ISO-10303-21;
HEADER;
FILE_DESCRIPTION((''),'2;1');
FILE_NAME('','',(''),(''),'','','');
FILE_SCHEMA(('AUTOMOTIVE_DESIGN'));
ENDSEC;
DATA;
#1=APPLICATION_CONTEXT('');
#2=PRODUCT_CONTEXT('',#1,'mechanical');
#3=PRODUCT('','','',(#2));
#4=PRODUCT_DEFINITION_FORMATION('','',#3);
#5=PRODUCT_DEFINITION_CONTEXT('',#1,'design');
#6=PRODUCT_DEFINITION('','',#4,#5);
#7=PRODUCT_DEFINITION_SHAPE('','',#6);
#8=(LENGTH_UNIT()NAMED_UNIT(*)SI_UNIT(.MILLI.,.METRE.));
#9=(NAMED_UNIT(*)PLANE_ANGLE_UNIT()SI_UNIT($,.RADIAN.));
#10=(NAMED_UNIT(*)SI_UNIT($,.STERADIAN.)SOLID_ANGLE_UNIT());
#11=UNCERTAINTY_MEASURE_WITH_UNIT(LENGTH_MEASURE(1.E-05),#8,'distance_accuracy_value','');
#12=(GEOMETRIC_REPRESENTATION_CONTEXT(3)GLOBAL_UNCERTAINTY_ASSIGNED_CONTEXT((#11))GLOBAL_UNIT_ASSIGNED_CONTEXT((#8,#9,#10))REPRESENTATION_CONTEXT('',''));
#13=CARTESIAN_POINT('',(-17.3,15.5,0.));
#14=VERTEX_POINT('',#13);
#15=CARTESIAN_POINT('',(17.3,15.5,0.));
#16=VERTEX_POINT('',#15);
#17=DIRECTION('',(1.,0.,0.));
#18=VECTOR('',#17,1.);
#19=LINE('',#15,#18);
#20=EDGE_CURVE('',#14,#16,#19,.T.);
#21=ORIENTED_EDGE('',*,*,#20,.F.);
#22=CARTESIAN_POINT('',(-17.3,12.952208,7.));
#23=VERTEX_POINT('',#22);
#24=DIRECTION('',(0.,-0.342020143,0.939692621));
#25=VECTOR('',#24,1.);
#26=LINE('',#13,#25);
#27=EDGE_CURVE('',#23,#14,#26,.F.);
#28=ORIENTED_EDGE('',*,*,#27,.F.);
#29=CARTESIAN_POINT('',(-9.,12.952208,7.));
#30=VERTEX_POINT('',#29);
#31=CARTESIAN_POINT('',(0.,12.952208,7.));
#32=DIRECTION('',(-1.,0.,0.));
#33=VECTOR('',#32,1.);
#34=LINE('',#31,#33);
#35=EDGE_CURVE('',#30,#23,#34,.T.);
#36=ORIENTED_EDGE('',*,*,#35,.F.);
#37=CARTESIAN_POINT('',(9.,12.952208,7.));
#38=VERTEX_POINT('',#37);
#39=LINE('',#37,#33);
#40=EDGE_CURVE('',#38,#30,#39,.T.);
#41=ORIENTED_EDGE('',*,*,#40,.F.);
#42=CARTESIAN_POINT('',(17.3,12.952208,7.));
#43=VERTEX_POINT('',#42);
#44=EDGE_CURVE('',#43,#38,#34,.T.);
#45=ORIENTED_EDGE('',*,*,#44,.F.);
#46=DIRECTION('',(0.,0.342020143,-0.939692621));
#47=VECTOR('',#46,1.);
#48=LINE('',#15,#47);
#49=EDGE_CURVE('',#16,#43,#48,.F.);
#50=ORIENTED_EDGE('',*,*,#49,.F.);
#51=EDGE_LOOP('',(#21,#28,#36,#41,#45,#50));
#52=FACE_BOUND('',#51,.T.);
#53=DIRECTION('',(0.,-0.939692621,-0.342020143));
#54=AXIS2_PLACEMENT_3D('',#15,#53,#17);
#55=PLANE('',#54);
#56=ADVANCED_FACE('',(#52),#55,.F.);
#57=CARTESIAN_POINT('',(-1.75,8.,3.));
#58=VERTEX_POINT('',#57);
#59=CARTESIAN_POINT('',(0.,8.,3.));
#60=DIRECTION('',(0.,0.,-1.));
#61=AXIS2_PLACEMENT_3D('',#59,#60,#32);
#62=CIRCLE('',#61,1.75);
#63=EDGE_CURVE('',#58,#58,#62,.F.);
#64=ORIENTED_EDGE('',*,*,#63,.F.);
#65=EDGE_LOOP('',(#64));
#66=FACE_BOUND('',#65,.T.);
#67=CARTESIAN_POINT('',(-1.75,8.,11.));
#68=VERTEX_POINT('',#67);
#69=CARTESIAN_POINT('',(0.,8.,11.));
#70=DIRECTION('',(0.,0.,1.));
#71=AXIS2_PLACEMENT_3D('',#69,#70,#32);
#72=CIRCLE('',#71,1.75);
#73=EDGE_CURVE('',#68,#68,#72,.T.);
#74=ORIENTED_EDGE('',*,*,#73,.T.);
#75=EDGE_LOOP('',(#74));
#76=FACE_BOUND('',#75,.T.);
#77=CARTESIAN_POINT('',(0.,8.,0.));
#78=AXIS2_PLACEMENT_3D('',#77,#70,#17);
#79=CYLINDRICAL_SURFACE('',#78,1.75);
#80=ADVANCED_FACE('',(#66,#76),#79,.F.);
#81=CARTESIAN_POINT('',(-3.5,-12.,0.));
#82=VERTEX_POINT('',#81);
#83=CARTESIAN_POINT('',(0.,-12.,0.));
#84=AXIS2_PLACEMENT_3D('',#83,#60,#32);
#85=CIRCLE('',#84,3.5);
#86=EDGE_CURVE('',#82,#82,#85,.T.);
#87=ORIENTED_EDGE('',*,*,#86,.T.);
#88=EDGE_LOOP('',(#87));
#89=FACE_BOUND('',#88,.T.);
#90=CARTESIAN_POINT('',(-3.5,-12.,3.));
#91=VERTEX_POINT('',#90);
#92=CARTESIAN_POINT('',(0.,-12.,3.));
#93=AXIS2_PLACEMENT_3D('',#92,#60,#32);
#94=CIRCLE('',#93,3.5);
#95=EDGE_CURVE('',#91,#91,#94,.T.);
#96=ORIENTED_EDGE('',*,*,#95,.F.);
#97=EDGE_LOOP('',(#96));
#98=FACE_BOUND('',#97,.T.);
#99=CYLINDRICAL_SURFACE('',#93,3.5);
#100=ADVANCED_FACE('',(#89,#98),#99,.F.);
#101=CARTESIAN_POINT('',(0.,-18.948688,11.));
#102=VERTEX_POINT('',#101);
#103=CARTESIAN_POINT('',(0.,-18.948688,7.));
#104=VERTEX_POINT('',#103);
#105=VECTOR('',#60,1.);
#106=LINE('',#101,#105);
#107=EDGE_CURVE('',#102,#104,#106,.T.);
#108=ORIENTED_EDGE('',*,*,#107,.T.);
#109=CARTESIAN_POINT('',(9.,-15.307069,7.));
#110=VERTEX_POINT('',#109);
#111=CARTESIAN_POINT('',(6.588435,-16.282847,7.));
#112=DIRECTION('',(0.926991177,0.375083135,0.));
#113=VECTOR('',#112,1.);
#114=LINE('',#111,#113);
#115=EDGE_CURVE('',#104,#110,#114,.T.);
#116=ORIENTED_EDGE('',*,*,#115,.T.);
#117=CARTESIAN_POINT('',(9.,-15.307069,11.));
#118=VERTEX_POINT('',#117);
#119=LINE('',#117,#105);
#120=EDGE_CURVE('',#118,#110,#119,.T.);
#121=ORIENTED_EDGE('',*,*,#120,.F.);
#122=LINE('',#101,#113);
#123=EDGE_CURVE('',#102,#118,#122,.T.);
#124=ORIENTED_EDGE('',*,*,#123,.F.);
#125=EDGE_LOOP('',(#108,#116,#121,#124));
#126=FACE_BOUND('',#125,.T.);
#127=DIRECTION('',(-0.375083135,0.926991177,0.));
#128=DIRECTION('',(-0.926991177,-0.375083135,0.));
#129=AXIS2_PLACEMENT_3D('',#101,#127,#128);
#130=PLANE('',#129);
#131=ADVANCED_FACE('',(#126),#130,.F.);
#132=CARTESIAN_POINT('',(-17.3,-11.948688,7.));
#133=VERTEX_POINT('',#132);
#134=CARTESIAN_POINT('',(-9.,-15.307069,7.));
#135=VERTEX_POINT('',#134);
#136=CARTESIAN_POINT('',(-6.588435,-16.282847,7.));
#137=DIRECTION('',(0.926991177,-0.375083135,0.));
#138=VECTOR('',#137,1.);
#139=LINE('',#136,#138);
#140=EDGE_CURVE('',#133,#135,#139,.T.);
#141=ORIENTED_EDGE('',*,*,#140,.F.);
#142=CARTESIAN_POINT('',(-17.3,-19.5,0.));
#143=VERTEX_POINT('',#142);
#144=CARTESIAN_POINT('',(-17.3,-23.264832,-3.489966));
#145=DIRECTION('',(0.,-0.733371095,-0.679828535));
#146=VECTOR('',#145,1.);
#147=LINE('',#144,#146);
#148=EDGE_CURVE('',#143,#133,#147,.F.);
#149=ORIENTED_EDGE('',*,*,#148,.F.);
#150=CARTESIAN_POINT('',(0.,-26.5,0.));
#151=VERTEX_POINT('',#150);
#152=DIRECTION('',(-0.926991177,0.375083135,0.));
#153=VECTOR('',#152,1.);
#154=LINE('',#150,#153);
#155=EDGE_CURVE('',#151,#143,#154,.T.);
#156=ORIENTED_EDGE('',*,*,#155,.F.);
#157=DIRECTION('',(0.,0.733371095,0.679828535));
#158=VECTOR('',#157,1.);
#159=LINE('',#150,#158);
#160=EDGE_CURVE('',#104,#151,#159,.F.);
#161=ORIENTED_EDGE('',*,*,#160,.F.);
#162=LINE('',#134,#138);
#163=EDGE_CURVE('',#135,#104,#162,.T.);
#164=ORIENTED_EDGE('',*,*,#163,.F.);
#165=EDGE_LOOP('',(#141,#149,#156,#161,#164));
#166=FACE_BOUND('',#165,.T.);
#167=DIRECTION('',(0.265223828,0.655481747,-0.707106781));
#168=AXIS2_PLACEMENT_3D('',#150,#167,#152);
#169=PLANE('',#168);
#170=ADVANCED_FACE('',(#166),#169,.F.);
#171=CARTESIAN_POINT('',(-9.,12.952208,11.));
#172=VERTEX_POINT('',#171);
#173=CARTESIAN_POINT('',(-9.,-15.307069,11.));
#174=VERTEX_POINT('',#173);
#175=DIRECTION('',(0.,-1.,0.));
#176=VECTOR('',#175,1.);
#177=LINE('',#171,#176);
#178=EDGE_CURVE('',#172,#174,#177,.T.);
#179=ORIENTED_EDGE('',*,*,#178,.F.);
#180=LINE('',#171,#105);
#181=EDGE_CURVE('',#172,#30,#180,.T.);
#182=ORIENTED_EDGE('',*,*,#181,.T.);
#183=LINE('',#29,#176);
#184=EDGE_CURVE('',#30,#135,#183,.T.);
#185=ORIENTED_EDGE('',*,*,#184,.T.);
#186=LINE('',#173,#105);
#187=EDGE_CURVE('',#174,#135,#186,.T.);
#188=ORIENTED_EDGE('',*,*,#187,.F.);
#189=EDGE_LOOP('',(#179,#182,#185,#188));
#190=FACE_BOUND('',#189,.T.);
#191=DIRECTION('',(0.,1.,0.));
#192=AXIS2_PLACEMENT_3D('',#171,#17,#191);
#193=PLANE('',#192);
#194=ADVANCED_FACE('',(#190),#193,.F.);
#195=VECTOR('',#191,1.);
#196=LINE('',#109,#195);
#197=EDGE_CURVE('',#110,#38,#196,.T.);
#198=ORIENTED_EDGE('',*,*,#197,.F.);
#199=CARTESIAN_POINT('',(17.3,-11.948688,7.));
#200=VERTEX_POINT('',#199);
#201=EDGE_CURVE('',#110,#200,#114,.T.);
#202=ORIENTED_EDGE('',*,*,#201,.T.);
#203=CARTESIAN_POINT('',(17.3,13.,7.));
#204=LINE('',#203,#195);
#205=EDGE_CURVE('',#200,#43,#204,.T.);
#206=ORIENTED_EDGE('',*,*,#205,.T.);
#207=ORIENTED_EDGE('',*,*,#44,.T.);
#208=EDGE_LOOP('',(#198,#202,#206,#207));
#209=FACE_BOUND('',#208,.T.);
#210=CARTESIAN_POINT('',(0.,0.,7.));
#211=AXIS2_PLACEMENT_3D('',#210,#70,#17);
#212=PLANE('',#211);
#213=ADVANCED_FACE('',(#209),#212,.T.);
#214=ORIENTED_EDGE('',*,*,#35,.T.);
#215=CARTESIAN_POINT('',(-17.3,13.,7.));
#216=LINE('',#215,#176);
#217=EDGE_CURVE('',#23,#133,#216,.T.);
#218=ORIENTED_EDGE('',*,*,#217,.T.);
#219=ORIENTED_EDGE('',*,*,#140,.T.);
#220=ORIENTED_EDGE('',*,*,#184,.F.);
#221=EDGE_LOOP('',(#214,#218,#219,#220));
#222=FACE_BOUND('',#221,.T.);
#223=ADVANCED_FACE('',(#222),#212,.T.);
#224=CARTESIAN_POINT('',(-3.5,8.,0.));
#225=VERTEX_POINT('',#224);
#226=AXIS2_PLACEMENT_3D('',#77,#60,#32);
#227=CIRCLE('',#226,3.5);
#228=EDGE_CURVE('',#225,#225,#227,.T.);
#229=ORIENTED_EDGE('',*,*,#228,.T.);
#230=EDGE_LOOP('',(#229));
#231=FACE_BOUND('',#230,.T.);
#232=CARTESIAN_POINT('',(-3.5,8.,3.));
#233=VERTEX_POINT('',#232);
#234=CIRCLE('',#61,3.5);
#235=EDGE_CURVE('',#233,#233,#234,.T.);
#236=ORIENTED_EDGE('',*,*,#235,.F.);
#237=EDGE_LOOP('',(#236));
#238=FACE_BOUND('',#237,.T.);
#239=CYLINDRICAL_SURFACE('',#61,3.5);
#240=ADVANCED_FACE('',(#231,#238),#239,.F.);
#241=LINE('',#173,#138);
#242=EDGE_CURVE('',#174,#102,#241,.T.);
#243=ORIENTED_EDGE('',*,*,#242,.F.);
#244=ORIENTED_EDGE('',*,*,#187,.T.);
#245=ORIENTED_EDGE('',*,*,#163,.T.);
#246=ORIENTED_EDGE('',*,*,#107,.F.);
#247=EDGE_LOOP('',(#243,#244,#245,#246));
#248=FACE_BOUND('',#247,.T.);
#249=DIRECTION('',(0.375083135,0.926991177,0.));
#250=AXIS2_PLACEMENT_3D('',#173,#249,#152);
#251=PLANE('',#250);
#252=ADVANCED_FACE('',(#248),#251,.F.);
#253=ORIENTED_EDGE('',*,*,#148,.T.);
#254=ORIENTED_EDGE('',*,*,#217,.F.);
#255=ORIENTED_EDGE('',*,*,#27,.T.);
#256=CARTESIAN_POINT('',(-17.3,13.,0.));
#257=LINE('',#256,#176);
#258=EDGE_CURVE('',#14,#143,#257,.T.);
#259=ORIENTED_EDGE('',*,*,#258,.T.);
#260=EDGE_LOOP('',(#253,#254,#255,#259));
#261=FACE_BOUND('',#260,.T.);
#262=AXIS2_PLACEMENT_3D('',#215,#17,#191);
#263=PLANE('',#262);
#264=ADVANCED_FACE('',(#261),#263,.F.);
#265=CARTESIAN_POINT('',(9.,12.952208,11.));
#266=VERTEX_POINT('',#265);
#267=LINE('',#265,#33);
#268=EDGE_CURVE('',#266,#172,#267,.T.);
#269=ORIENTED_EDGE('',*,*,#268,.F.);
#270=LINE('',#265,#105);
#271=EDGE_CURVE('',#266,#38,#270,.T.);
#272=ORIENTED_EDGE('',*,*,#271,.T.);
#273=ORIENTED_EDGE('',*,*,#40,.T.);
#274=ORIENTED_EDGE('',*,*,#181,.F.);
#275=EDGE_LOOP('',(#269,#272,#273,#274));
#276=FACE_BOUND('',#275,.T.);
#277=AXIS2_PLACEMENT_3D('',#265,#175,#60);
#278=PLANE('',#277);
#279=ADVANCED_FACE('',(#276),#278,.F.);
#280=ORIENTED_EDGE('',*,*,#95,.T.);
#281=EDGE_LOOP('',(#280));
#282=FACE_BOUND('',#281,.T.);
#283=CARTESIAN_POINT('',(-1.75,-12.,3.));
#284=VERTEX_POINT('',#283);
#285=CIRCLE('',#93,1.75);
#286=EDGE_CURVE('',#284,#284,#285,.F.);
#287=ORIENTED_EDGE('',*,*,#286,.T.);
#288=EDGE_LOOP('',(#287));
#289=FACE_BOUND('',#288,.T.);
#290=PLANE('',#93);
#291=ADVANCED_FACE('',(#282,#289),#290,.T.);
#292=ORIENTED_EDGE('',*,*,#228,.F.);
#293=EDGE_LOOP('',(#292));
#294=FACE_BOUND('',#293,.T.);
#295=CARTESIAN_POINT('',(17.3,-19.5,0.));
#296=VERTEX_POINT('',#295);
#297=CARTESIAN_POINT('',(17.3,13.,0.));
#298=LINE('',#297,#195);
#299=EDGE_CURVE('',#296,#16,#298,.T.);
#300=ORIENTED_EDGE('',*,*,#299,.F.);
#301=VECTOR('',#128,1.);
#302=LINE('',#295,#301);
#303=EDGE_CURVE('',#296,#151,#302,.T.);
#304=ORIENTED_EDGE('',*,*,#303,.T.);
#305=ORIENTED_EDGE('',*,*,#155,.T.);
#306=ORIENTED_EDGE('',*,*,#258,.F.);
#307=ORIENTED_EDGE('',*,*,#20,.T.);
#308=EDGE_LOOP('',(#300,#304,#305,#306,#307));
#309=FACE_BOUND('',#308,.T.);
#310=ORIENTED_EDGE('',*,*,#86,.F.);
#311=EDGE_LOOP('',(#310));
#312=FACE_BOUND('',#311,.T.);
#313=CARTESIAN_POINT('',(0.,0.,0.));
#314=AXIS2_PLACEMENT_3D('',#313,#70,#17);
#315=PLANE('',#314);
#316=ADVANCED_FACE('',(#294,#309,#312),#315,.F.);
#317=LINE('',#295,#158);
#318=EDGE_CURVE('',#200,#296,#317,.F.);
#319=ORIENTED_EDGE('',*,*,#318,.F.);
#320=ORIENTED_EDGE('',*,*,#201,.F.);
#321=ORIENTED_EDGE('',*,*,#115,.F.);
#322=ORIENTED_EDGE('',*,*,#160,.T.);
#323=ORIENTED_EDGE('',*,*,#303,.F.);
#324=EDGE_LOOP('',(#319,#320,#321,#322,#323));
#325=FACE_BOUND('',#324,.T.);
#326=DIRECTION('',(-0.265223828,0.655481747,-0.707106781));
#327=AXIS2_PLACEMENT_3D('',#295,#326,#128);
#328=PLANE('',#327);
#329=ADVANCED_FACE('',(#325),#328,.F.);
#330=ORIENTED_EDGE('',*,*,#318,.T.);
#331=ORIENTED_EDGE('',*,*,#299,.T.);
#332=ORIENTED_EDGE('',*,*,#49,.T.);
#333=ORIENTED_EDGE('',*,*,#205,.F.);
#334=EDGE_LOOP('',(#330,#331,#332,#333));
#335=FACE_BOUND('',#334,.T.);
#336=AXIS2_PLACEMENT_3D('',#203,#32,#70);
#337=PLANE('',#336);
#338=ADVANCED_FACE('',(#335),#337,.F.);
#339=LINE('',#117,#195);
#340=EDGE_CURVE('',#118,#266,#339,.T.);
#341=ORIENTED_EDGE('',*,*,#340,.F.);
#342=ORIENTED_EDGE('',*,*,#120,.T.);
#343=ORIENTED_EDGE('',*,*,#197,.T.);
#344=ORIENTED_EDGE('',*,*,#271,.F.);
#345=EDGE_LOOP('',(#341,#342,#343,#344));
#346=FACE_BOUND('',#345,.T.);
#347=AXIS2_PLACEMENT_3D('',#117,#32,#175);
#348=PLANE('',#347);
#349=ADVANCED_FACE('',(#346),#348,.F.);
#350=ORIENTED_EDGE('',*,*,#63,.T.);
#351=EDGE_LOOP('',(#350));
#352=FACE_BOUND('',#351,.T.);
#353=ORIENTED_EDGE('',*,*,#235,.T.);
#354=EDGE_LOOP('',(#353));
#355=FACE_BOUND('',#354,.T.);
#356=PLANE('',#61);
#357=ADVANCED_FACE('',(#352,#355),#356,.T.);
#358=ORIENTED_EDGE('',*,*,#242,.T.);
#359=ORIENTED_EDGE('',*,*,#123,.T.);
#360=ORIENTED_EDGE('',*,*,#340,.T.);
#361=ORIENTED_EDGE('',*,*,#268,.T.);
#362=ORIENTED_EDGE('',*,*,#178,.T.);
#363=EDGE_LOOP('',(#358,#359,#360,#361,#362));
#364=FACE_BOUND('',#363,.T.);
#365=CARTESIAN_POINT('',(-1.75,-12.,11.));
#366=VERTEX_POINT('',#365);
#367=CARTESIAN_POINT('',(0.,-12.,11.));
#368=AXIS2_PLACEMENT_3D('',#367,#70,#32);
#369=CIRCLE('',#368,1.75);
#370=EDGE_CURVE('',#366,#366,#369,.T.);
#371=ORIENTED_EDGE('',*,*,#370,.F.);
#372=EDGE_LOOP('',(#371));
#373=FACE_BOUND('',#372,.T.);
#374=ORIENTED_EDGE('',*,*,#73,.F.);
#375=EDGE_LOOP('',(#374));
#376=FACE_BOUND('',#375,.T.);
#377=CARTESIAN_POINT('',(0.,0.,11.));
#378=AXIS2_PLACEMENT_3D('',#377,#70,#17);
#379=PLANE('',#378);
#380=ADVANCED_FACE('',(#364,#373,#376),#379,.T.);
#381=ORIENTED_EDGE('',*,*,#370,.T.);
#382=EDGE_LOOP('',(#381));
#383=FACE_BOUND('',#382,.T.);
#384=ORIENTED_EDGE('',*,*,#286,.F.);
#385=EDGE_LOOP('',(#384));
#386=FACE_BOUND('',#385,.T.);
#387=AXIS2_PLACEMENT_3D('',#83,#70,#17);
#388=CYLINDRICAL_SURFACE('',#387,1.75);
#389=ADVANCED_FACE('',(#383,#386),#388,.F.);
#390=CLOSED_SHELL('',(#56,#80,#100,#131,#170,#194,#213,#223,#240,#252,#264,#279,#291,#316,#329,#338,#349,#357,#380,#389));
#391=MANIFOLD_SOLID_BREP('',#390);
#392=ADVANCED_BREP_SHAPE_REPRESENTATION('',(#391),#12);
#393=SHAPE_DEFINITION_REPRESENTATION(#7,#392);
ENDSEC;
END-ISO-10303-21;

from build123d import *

# Parameters (mm, degrees)
ESBO_O1_W                = 34.6
ESBO_O1_H                = 26
RESSALTO_EXTRUS_O1_DEPTH = 7
ESBO_O10_W               = 34.6
ESBO_O10_H               = 2.5
RESSALTO_EXTRUS_O4_DEPTH = 7
CHANFRO1_SIZE            = 7
CHANFRO2_SIZE2           = 7
CHANFRO2_SIZE            = 2.54779164
RESSALTO_EXTRUS_O5_DEPTH = 4
ESBO_O11_R               = 1.75
CORTE_EXTRUS_O1_DEPTH    = 34.504328079
ESBO_O12_R               = 3.5
CORTE_EXTRUS_O2_DEPTH    = 3


with BuildPart() as part:
    # Esboço1 → Ressalto-extrusão1 (new body)
    with BuildSketch(Plane.XY):
        Rectangle(ESBO_O1_W, ESBO_O1_H)
    extrude(amount=RESSALTO_EXTRUS_O1_DEPTH)

    # Esboço10 → Ressalto-extrusão4 (add)
    with BuildSketch(Plane(origin=(0, 0, 0), x_dir=(-1, 0, 0), z_dir=(0, 0, -1))):
        Polygon((-17.3, -19.5), (0, -26.5), (17.3, -19.5), (17.3, -13), (-17.3, -13), align=None)
        with Locations((0, 14.25)):
            Rectangle(ESBO_O10_W, ESBO_O10_H)
    extrude(amount=-RESSALTO_EXTRUS_O4_DEPTH)

    # Chanfro1
    chanfro1_edges = [part.edges().sort_by_distance(p)[0] for p in [
        (8.65, -23, 7),
        (-8.65, -23, 7),
    ]]
    chamfer(chanfro1_edges, length=CHANFRO1_SIZE - 0.0001)  # a hair under: the kernel refuses the full size

    # Chanfro2
    chanfro2_edges = [part.edges().sort_by_distance(p)[0] for p in [
        (0, 15.5, 7),
    ]]
    chanfro2_side = [part.faces().sort_by_distance(p)[0] for p in [
        (0, 15.449044167, 7),
    ]]
    chamfer(chanfro2_edges, length=CHANFRO2_SIZE - 0.0001, length2=CHANFRO2_SIZE2 - 0.0001, reference=chanfro2_side[0])  # a hair under: the kernel refuses the full size

    # Esboço13 → Ressalto-extrusão5 (add)
    with BuildSketch(Plane.XY.offset(7)):
        Polygon((9, -15.307069068), (9, 12.95220836), (-9, 12.95220836), (-9, -15.307069068), (0, -18.948687565), align=None)
    extrude(amount=RESSALTO_EXTRUS_O5_DEPTH)

    # Esboço11 → Corte-extrusão1 (cut, through all)
    with BuildSketch(Plane.XY.offset(11)):
        with Locations(Location((0, -12, 0), (0, 0, 180))):
            Circle(ESBO_O11_R)
        with Locations(Location((0, 8, 0), (0, 0, 180))):
            Circle(ESBO_O11_R)
    extrude(amount=-CORTE_EXTRUS_O1_DEPTH, mode=Mode.SUBTRACT)

    # Esboço12 → Corte-extrusão2 (cut)
    with BuildSketch(Plane(origin=(0, 0, 0), x_dir=(-1, 0, 0), z_dir=(0, 0, -1))):
        with Locations((0, 8)):
            Circle(ESBO_O12_R)
        with Locations((0, -12)):
            Circle(ESBO_O12_R)
    extrude(amount=-CORTE_EXTRUS_O2_DEPTH, mode=Mode.SUBTRACT)


solid = part.part
